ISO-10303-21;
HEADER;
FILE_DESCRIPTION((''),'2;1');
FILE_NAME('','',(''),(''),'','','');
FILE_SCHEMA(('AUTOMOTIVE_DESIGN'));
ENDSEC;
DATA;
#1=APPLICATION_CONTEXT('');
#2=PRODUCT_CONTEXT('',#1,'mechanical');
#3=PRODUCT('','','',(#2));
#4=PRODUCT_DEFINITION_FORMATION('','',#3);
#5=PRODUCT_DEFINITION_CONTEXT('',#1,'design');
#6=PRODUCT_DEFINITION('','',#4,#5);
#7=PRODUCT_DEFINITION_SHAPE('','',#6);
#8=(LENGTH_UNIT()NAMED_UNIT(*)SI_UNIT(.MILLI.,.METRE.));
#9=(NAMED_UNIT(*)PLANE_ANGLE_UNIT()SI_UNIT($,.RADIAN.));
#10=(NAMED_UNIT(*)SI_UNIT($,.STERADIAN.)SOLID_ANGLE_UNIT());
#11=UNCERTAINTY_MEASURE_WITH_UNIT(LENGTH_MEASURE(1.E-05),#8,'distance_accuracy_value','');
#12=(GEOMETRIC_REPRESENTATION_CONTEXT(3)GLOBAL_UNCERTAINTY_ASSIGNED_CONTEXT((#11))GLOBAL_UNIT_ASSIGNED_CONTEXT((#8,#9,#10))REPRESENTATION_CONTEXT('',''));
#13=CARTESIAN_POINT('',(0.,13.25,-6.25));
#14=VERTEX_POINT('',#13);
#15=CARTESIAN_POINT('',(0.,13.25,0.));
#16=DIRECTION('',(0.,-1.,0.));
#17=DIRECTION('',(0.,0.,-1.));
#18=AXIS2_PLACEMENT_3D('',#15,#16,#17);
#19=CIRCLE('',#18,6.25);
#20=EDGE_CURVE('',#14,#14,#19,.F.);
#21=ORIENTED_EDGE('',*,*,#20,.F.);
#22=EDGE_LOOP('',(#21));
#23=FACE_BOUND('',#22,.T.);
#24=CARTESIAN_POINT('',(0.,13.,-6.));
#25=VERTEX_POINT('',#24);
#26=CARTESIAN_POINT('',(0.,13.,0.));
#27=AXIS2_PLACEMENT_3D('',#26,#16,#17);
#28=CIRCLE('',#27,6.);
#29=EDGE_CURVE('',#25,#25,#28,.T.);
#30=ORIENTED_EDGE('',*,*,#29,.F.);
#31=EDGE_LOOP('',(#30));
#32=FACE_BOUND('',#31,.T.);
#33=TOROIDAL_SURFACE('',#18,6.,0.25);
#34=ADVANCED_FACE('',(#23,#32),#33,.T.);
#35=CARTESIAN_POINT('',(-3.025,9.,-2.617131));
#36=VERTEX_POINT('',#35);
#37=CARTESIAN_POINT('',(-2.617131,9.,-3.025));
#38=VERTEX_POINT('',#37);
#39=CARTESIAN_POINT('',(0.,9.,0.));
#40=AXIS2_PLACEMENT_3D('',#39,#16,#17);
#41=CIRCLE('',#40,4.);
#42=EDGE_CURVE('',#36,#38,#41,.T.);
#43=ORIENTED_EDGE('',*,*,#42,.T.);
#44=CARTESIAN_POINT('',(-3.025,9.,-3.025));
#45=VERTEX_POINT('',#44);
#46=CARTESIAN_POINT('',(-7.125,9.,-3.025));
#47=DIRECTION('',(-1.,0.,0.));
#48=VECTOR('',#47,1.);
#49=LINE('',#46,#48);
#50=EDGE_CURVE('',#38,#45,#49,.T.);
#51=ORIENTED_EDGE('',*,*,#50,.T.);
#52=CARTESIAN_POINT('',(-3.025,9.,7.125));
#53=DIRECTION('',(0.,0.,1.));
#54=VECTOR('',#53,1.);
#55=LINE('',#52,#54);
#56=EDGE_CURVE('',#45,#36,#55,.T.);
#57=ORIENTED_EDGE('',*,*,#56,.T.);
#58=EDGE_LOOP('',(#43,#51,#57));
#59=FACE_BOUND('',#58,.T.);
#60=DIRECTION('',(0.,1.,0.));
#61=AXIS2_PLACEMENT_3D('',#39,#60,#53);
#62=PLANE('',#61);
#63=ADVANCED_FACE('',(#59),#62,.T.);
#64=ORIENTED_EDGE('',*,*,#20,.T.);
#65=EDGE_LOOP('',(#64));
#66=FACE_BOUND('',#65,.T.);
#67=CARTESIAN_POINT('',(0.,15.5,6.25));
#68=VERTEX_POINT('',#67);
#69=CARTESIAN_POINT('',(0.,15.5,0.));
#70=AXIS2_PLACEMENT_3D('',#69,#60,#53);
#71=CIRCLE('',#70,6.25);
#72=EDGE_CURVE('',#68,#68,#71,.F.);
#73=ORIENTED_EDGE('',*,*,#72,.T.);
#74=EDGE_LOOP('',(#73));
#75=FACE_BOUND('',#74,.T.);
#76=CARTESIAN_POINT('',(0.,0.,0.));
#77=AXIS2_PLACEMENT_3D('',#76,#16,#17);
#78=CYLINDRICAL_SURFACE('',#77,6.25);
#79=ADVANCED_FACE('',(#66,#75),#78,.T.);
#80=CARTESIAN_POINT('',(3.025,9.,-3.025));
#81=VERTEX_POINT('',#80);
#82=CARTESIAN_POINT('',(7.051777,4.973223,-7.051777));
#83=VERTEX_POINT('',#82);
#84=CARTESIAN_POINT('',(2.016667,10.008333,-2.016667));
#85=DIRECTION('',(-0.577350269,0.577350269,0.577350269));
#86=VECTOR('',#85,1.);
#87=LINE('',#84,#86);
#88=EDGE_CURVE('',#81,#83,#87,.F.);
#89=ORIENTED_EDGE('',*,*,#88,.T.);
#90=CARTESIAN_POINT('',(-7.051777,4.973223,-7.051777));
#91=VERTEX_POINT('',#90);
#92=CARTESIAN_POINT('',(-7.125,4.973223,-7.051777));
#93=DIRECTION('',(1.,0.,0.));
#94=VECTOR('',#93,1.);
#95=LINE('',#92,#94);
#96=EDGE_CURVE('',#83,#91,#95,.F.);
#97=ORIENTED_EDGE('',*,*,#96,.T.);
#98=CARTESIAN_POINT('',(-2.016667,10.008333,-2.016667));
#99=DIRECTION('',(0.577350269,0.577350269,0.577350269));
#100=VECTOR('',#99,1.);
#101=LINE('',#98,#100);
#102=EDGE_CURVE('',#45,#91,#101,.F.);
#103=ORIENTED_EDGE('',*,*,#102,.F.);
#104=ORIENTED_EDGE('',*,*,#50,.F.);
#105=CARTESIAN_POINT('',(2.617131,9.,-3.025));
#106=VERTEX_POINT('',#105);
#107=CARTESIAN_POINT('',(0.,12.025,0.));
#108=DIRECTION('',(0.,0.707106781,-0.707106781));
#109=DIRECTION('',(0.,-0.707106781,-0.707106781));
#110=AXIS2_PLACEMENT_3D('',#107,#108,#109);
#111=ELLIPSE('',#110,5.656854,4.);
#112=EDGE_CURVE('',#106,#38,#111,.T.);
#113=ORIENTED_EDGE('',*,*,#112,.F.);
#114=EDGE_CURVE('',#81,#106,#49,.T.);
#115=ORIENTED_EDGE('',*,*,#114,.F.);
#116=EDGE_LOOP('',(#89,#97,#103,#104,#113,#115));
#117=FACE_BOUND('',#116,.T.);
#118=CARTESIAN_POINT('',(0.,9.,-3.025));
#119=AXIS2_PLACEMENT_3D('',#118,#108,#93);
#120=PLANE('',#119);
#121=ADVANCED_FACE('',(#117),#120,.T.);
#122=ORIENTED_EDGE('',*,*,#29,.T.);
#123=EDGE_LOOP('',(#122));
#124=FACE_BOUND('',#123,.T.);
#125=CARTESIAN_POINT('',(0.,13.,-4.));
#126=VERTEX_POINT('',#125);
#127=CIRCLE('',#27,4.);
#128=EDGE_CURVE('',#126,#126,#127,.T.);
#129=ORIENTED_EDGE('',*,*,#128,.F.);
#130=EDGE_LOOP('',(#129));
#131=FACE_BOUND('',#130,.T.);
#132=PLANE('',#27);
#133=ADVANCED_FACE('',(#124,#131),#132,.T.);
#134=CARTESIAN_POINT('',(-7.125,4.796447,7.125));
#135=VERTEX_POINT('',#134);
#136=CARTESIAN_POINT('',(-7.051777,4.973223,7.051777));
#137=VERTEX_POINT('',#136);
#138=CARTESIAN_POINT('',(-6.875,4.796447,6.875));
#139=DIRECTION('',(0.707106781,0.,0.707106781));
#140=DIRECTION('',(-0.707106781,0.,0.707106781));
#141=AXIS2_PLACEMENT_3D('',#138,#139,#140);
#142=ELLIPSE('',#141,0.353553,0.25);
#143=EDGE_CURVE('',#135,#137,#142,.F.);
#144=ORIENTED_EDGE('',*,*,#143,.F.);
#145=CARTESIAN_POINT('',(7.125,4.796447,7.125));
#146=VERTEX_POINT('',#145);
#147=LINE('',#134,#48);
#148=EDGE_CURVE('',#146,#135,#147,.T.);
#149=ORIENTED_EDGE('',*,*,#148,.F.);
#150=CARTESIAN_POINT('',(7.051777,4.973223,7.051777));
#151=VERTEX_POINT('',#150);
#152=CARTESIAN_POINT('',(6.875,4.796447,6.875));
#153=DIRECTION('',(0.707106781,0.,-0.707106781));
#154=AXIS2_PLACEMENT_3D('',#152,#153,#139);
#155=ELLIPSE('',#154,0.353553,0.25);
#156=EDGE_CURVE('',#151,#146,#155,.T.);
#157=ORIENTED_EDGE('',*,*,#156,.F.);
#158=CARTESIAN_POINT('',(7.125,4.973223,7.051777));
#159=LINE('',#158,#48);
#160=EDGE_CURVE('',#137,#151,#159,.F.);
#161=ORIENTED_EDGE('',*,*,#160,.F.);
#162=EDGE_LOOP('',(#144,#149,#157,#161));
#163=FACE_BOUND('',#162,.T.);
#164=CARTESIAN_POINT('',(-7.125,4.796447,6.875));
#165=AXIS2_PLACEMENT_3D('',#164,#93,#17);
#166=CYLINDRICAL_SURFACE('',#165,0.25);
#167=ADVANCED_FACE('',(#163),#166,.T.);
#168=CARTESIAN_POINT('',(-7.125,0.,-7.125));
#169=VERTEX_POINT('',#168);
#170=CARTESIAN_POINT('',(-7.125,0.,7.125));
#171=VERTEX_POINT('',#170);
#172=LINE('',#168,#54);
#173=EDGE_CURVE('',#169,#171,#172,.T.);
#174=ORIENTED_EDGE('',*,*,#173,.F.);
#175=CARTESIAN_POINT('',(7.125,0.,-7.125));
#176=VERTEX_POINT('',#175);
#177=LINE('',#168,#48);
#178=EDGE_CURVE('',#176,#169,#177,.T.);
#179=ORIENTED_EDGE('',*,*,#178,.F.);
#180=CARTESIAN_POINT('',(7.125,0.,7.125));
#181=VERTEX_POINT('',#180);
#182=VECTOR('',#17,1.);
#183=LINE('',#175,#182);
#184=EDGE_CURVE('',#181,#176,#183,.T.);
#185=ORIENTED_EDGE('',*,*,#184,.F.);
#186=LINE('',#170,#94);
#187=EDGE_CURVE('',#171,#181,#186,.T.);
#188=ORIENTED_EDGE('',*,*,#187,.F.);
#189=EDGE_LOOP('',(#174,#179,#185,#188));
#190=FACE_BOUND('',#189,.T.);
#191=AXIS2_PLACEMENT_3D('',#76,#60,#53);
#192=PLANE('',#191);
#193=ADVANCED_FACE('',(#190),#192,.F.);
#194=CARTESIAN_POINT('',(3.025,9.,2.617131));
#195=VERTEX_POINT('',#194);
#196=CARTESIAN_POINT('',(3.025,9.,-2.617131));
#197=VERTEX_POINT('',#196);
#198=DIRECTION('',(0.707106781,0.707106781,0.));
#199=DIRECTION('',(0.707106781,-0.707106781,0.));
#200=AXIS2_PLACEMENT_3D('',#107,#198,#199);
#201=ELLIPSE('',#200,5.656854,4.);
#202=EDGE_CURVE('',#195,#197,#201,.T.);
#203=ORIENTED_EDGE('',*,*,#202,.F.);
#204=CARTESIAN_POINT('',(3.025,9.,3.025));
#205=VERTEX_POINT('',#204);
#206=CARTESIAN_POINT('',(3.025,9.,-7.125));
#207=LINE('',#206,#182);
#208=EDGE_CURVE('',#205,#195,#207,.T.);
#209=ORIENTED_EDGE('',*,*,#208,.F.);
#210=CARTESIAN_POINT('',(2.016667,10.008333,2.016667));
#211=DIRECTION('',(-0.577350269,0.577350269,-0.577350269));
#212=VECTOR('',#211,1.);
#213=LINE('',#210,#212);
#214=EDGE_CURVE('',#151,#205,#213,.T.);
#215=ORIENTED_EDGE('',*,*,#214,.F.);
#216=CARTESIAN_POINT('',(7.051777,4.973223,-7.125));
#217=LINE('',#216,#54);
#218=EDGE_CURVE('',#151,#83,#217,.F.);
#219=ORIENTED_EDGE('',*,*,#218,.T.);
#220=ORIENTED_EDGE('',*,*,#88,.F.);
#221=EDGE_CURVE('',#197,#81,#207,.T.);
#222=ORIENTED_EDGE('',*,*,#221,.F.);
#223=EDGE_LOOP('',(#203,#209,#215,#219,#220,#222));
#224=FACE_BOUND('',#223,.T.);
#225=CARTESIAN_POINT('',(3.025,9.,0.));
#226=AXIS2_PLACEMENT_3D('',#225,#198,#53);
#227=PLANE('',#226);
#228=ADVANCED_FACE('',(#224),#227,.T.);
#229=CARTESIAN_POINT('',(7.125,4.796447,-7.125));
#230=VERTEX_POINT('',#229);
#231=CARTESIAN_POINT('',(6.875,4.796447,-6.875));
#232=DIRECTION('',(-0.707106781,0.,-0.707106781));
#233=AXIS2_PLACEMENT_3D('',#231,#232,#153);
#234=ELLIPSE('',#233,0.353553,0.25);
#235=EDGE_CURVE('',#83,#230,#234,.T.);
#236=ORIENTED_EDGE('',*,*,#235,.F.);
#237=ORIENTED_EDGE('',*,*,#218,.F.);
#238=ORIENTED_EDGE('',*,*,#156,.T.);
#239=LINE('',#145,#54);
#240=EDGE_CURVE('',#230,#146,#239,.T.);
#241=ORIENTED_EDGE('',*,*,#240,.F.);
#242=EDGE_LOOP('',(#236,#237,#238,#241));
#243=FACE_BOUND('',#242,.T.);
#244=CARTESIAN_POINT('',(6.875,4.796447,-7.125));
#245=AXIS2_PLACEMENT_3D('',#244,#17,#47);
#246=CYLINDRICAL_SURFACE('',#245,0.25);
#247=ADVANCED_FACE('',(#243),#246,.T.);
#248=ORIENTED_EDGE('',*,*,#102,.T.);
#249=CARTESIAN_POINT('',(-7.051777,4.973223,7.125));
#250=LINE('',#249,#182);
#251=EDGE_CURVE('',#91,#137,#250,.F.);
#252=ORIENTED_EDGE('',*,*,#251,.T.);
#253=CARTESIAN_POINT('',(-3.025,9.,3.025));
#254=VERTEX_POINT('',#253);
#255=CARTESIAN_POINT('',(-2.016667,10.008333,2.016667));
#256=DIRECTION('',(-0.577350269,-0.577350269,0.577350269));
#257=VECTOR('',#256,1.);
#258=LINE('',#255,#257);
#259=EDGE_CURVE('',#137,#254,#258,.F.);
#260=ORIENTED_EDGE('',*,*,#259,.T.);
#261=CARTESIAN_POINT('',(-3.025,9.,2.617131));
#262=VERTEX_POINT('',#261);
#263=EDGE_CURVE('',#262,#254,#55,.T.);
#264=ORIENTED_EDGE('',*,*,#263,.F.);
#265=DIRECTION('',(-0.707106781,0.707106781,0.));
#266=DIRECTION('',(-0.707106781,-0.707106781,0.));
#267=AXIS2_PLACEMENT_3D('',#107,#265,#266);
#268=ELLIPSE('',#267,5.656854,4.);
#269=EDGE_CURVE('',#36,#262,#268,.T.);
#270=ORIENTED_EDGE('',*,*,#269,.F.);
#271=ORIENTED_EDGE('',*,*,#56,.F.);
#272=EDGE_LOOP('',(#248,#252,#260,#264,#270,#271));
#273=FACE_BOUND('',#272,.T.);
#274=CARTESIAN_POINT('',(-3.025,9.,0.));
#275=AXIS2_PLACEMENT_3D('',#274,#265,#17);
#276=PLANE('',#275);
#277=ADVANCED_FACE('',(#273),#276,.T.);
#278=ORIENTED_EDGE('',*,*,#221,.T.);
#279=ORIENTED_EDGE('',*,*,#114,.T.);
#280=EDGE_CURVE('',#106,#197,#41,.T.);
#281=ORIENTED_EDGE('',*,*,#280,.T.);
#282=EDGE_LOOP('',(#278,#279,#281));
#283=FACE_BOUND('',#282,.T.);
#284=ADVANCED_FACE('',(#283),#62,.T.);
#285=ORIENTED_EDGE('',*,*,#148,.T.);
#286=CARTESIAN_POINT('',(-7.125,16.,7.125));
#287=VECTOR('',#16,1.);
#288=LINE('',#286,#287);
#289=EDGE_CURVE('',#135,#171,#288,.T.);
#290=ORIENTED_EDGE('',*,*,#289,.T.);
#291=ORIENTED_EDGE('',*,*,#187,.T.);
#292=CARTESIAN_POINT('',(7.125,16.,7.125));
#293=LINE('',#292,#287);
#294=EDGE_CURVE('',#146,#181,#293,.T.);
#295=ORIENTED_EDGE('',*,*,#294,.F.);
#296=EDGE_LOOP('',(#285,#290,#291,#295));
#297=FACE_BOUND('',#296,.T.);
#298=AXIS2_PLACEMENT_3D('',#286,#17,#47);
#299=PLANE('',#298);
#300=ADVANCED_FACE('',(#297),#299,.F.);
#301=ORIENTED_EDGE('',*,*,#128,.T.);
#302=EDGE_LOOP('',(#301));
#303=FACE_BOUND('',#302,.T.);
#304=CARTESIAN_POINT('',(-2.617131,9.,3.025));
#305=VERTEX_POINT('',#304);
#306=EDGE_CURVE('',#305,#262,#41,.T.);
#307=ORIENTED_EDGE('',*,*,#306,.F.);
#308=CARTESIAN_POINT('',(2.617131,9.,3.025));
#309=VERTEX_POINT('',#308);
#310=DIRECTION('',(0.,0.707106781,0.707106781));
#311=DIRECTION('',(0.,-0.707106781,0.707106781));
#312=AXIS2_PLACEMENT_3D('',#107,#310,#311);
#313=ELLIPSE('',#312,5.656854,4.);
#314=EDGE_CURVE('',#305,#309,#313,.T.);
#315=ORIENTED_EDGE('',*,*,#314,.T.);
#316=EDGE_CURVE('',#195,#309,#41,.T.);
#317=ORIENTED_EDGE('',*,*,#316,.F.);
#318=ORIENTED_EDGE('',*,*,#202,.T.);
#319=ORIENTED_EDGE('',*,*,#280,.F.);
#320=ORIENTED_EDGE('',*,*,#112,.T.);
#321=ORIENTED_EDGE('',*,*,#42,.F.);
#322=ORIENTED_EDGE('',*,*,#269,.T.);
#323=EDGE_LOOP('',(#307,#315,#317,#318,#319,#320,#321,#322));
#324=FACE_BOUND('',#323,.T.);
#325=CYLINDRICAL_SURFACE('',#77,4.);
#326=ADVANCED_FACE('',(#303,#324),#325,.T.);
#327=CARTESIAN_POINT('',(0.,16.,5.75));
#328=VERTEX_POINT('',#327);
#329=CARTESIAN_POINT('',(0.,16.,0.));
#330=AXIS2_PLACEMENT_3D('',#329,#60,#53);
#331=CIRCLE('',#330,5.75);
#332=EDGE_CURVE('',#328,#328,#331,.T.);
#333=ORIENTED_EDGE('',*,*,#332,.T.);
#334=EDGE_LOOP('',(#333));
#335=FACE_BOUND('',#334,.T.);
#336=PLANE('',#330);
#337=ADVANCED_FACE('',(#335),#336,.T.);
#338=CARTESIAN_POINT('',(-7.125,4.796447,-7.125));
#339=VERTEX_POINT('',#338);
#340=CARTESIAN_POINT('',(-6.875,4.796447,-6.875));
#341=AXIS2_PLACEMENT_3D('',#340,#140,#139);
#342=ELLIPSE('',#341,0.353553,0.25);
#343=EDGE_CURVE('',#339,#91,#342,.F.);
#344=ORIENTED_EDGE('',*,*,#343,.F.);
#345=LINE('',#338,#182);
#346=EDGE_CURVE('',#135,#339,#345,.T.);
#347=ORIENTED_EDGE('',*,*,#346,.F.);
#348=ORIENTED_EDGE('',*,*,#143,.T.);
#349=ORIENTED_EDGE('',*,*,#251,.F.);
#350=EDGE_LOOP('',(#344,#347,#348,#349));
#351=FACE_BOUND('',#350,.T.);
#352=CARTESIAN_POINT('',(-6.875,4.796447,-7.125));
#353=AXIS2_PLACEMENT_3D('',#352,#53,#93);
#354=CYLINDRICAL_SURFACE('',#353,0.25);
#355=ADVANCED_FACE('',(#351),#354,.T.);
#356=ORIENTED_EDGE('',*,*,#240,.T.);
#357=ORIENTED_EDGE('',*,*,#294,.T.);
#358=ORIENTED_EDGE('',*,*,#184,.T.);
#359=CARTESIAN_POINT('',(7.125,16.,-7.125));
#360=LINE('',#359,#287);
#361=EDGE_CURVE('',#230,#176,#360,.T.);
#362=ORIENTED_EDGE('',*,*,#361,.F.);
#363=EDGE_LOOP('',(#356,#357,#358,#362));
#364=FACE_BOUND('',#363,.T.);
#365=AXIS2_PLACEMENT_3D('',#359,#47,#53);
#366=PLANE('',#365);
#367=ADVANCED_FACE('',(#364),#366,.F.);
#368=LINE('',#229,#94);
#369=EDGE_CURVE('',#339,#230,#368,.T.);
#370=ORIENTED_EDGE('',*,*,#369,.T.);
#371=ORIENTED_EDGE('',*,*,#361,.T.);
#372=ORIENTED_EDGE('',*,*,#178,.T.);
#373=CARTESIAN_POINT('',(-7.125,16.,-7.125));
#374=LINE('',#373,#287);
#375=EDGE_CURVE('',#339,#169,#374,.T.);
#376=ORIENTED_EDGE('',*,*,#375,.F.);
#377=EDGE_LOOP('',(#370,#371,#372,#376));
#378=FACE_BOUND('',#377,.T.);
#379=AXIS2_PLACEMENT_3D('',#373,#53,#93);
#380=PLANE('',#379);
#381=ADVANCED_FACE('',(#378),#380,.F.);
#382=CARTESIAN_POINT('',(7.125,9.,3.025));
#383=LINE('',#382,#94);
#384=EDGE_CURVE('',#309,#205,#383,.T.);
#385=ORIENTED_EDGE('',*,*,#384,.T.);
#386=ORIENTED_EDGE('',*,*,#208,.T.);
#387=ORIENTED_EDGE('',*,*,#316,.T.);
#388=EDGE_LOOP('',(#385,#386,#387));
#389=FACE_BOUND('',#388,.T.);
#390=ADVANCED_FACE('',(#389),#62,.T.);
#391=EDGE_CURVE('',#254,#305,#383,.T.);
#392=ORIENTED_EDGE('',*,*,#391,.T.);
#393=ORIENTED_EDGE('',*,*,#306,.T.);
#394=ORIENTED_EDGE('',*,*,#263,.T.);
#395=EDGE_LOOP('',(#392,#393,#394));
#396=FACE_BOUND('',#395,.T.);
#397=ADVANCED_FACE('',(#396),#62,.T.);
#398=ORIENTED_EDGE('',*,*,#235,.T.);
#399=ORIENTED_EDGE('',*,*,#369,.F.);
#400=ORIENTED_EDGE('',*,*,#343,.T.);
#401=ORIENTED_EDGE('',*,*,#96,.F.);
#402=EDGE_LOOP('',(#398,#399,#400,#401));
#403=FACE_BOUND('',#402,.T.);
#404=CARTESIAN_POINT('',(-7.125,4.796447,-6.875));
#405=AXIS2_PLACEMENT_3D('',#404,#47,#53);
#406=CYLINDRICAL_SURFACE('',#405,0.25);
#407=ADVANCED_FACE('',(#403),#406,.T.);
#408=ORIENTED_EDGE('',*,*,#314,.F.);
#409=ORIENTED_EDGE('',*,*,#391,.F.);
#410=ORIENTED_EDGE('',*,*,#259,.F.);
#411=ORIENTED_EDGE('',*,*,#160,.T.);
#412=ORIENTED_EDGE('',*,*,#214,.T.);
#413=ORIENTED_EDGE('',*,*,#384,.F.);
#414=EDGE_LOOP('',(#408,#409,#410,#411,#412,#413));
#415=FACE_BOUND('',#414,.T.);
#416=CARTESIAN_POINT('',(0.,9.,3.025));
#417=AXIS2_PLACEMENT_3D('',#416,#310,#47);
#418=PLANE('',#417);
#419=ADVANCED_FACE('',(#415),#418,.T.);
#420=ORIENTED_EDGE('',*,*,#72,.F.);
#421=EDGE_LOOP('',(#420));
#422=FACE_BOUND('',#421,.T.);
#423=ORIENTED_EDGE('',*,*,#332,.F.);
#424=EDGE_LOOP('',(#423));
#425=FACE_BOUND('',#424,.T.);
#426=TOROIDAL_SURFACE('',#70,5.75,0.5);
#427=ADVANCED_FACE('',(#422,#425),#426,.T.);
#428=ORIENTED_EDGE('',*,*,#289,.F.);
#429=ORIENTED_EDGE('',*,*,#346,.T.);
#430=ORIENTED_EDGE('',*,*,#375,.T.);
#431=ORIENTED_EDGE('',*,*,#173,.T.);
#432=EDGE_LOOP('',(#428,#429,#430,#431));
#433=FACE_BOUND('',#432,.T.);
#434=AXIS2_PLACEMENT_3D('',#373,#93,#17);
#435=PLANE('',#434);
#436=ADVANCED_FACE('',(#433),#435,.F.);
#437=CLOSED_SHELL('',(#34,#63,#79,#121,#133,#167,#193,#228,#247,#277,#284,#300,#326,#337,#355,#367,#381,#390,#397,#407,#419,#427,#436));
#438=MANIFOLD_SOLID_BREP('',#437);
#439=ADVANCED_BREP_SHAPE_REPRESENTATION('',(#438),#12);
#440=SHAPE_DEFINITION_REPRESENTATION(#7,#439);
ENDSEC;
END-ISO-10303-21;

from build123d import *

# Parameters (mm, degrees)
SKIZZE1_W                       = 14.25
SKIZZE1_H                       = 14.25
AUFSATZ_LINEAR_AUSTRAGEN1_DEPTH = 16
FASE1_SIZE                      = 4.1
VERRUNDUNG2_R                   = 0.5
VERRUNDUNG3_R                   = 0.25
VERRUNDUNG4_R                   = 0.25


with BuildPart() as part:
    # Skizze1 → Aufsatz-Linear austragen1 (new body)
    with BuildSketch(Plane(origin=(0, 0, 0), x_dir=(1, 0, 0), z_dir=(0, 1, 0))):
        Rectangle(SKIZZE1_W, SKIZZE1_H)
    extrude(amount=AUFSATZ_LINEAR_AUSTRAGEN1_DEPTH)

    # Skizze6 → Schnitt-Rotation4 (revolve, cut)
    with BuildSketch(Plane(origin=(0, 0, 0), x_dir=(0, 0, -1), z_dir=(1, 0, 0))):
        Polygon((6.25, 16), (13.25, 16), (13.25, 9), (4, 9), (4, 13), (6.25, 13), align=None)
    revolve(axis=Axis((0, 0, 0), (0, 1, 0)), mode=Mode.SUBTRACT)

    # Fase1
    # the kernel refuses this chamfer: 4.1 mm, written as the material it takes off along each edge
    with BuildSketch(Plane(origin=(17.668900251, 9, 7.125), x_dir=(0, 0.027495876610586303, -0.9996219169112966), z_dir=(-1, 0, 0))) as fase1_piece_1_section:
        Polygon((FASE1_SIZE * 0.999621916911, FASE1_SIZE * 0.0274958766106), (-FASE1_SIZE * 0.0274958766106, FASE1_SIZE * 0.999621916911), (0, 0), align=None)
    fase1_piece_1 = extrude(amount=35.337800501, mode=Mode.PRIVATE)
    fase1_piece_1 = fase1_piece_1 - Plane(origin=(0, 7.640449018, 0), x_dir=(0, 0, -1), z_dir=(0, 1, 0)) * Cylinder(4, 88, mode=Mode.PRIVATE)
    add(fase1_piece_1, mode=Mode.SUBTRACT)
    with BuildSketch(Plane(origin=(7.125, 9, -17.668900251), x_dir=(0.027495876610586303, -0.9996219169112966, 0), z_dir=(0, 0, 1))) as fase1_piece_2_section:
        Polygon((FASE1_SIZE * 0.999621916911, -FASE1_SIZE * 0.0274958766106), (-FASE1_SIZE * 0.0274958766106, -FASE1_SIZE * 0.999621916911), (0, 0), align=None)
    fase1_piece_2 = extrude(amount=35.337800501, mode=Mode.PRIVATE)
    fase1_piece_2 = fase1_piece_2 - Plane(origin=(0, 7.640449013, 0), x_dir=(0, 0, -1), z_dir=(0, 1, 0)) * Cylinder(4, 88, mode=Mode.PRIVATE)
    add(fase1_piece_2, mode=Mode.SUBTRACT)
    with BuildSketch(Plane(origin=(-17.668900251, 9, -7.125), x_dir=(0, -0.9996219169112966, -0.027495876610586303), z_dir=(1, 0, 0))) as fase1_piece_3_section:
        Polygon((FASE1_SIZE * 0.999621916911, -FASE1_SIZE * 0.0274958766106), (-FASE1_SIZE * 0.0274958766106, -FASE1_SIZE * 0.999621916911), (0, 0), align=None)
    fase1_piece_3 = extrude(amount=35.337800501, mode=Mode.PRIVATE)
    fase1_piece_3 = fase1_piece_3 - Plane(origin=(0, 7.640449014, 0), x_dir=(0, 0, -1), z_dir=(0, 1, 0)) * Cylinder(4, 88, mode=Mode.PRIVATE)
    add(fase1_piece_3, mode=Mode.SUBTRACT)
    with BuildSketch(Plane(origin=(-7.125, 9, 17.668900251), x_dir=(0.9996219169112966, 0.027495876610586303, 0), z_dir=(0, 0, -1))) as fase1_piece_4_section:
        Polygon((FASE1_SIZE * 0.999621916911, FASE1_SIZE * 0.0274958766106), (-FASE1_SIZE * 0.0274958766106, FASE1_SIZE * 0.999621916911), (0, 0), align=None)
    fase1_piece_4 = extrude(amount=35.337800501, mode=Mode.PRIVATE)
    fase1_piece_4 = fase1_piece_4 - Plane(origin=(0, 7.640449018, 0), x_dir=(0, 0, -1), z_dir=(0, 1, 0)) * Cylinder(4, 88, mode=Mode.PRIVATE)
    add(fase1_piece_4, mode=Mode.SUBTRACT)

    # Verrundung2
    verrundung2_edges = [part.edges().sort_by_distance(p)[0] for p in [
        (0, 16, 6.25),
    ]]
    fillet(verrundung2_edges, radius=VERRUNDUNG2_R)

    # Verrundung3
    verrundung3_edges = [part.edges().sort_by_distance(p)[0] for p in [
        (-7.125, 4.9, 0),
        (0, 4.9, -7.125),
        (7.125, 4.9, 0),
        (0, 4.9, 7.125),
    ]]
    fillet(verrundung3_edges, radius=VERRUNDUNG3_R)

    # Verrundung4
    verrundung4_edges = [part.edges().sort_by_distance(p)[0] for p in [
        (0, 13, 6.25),
    ]]
    fillet(verrundung4_edges, radius=VERRUNDUNG4_R)


solid = part.part
